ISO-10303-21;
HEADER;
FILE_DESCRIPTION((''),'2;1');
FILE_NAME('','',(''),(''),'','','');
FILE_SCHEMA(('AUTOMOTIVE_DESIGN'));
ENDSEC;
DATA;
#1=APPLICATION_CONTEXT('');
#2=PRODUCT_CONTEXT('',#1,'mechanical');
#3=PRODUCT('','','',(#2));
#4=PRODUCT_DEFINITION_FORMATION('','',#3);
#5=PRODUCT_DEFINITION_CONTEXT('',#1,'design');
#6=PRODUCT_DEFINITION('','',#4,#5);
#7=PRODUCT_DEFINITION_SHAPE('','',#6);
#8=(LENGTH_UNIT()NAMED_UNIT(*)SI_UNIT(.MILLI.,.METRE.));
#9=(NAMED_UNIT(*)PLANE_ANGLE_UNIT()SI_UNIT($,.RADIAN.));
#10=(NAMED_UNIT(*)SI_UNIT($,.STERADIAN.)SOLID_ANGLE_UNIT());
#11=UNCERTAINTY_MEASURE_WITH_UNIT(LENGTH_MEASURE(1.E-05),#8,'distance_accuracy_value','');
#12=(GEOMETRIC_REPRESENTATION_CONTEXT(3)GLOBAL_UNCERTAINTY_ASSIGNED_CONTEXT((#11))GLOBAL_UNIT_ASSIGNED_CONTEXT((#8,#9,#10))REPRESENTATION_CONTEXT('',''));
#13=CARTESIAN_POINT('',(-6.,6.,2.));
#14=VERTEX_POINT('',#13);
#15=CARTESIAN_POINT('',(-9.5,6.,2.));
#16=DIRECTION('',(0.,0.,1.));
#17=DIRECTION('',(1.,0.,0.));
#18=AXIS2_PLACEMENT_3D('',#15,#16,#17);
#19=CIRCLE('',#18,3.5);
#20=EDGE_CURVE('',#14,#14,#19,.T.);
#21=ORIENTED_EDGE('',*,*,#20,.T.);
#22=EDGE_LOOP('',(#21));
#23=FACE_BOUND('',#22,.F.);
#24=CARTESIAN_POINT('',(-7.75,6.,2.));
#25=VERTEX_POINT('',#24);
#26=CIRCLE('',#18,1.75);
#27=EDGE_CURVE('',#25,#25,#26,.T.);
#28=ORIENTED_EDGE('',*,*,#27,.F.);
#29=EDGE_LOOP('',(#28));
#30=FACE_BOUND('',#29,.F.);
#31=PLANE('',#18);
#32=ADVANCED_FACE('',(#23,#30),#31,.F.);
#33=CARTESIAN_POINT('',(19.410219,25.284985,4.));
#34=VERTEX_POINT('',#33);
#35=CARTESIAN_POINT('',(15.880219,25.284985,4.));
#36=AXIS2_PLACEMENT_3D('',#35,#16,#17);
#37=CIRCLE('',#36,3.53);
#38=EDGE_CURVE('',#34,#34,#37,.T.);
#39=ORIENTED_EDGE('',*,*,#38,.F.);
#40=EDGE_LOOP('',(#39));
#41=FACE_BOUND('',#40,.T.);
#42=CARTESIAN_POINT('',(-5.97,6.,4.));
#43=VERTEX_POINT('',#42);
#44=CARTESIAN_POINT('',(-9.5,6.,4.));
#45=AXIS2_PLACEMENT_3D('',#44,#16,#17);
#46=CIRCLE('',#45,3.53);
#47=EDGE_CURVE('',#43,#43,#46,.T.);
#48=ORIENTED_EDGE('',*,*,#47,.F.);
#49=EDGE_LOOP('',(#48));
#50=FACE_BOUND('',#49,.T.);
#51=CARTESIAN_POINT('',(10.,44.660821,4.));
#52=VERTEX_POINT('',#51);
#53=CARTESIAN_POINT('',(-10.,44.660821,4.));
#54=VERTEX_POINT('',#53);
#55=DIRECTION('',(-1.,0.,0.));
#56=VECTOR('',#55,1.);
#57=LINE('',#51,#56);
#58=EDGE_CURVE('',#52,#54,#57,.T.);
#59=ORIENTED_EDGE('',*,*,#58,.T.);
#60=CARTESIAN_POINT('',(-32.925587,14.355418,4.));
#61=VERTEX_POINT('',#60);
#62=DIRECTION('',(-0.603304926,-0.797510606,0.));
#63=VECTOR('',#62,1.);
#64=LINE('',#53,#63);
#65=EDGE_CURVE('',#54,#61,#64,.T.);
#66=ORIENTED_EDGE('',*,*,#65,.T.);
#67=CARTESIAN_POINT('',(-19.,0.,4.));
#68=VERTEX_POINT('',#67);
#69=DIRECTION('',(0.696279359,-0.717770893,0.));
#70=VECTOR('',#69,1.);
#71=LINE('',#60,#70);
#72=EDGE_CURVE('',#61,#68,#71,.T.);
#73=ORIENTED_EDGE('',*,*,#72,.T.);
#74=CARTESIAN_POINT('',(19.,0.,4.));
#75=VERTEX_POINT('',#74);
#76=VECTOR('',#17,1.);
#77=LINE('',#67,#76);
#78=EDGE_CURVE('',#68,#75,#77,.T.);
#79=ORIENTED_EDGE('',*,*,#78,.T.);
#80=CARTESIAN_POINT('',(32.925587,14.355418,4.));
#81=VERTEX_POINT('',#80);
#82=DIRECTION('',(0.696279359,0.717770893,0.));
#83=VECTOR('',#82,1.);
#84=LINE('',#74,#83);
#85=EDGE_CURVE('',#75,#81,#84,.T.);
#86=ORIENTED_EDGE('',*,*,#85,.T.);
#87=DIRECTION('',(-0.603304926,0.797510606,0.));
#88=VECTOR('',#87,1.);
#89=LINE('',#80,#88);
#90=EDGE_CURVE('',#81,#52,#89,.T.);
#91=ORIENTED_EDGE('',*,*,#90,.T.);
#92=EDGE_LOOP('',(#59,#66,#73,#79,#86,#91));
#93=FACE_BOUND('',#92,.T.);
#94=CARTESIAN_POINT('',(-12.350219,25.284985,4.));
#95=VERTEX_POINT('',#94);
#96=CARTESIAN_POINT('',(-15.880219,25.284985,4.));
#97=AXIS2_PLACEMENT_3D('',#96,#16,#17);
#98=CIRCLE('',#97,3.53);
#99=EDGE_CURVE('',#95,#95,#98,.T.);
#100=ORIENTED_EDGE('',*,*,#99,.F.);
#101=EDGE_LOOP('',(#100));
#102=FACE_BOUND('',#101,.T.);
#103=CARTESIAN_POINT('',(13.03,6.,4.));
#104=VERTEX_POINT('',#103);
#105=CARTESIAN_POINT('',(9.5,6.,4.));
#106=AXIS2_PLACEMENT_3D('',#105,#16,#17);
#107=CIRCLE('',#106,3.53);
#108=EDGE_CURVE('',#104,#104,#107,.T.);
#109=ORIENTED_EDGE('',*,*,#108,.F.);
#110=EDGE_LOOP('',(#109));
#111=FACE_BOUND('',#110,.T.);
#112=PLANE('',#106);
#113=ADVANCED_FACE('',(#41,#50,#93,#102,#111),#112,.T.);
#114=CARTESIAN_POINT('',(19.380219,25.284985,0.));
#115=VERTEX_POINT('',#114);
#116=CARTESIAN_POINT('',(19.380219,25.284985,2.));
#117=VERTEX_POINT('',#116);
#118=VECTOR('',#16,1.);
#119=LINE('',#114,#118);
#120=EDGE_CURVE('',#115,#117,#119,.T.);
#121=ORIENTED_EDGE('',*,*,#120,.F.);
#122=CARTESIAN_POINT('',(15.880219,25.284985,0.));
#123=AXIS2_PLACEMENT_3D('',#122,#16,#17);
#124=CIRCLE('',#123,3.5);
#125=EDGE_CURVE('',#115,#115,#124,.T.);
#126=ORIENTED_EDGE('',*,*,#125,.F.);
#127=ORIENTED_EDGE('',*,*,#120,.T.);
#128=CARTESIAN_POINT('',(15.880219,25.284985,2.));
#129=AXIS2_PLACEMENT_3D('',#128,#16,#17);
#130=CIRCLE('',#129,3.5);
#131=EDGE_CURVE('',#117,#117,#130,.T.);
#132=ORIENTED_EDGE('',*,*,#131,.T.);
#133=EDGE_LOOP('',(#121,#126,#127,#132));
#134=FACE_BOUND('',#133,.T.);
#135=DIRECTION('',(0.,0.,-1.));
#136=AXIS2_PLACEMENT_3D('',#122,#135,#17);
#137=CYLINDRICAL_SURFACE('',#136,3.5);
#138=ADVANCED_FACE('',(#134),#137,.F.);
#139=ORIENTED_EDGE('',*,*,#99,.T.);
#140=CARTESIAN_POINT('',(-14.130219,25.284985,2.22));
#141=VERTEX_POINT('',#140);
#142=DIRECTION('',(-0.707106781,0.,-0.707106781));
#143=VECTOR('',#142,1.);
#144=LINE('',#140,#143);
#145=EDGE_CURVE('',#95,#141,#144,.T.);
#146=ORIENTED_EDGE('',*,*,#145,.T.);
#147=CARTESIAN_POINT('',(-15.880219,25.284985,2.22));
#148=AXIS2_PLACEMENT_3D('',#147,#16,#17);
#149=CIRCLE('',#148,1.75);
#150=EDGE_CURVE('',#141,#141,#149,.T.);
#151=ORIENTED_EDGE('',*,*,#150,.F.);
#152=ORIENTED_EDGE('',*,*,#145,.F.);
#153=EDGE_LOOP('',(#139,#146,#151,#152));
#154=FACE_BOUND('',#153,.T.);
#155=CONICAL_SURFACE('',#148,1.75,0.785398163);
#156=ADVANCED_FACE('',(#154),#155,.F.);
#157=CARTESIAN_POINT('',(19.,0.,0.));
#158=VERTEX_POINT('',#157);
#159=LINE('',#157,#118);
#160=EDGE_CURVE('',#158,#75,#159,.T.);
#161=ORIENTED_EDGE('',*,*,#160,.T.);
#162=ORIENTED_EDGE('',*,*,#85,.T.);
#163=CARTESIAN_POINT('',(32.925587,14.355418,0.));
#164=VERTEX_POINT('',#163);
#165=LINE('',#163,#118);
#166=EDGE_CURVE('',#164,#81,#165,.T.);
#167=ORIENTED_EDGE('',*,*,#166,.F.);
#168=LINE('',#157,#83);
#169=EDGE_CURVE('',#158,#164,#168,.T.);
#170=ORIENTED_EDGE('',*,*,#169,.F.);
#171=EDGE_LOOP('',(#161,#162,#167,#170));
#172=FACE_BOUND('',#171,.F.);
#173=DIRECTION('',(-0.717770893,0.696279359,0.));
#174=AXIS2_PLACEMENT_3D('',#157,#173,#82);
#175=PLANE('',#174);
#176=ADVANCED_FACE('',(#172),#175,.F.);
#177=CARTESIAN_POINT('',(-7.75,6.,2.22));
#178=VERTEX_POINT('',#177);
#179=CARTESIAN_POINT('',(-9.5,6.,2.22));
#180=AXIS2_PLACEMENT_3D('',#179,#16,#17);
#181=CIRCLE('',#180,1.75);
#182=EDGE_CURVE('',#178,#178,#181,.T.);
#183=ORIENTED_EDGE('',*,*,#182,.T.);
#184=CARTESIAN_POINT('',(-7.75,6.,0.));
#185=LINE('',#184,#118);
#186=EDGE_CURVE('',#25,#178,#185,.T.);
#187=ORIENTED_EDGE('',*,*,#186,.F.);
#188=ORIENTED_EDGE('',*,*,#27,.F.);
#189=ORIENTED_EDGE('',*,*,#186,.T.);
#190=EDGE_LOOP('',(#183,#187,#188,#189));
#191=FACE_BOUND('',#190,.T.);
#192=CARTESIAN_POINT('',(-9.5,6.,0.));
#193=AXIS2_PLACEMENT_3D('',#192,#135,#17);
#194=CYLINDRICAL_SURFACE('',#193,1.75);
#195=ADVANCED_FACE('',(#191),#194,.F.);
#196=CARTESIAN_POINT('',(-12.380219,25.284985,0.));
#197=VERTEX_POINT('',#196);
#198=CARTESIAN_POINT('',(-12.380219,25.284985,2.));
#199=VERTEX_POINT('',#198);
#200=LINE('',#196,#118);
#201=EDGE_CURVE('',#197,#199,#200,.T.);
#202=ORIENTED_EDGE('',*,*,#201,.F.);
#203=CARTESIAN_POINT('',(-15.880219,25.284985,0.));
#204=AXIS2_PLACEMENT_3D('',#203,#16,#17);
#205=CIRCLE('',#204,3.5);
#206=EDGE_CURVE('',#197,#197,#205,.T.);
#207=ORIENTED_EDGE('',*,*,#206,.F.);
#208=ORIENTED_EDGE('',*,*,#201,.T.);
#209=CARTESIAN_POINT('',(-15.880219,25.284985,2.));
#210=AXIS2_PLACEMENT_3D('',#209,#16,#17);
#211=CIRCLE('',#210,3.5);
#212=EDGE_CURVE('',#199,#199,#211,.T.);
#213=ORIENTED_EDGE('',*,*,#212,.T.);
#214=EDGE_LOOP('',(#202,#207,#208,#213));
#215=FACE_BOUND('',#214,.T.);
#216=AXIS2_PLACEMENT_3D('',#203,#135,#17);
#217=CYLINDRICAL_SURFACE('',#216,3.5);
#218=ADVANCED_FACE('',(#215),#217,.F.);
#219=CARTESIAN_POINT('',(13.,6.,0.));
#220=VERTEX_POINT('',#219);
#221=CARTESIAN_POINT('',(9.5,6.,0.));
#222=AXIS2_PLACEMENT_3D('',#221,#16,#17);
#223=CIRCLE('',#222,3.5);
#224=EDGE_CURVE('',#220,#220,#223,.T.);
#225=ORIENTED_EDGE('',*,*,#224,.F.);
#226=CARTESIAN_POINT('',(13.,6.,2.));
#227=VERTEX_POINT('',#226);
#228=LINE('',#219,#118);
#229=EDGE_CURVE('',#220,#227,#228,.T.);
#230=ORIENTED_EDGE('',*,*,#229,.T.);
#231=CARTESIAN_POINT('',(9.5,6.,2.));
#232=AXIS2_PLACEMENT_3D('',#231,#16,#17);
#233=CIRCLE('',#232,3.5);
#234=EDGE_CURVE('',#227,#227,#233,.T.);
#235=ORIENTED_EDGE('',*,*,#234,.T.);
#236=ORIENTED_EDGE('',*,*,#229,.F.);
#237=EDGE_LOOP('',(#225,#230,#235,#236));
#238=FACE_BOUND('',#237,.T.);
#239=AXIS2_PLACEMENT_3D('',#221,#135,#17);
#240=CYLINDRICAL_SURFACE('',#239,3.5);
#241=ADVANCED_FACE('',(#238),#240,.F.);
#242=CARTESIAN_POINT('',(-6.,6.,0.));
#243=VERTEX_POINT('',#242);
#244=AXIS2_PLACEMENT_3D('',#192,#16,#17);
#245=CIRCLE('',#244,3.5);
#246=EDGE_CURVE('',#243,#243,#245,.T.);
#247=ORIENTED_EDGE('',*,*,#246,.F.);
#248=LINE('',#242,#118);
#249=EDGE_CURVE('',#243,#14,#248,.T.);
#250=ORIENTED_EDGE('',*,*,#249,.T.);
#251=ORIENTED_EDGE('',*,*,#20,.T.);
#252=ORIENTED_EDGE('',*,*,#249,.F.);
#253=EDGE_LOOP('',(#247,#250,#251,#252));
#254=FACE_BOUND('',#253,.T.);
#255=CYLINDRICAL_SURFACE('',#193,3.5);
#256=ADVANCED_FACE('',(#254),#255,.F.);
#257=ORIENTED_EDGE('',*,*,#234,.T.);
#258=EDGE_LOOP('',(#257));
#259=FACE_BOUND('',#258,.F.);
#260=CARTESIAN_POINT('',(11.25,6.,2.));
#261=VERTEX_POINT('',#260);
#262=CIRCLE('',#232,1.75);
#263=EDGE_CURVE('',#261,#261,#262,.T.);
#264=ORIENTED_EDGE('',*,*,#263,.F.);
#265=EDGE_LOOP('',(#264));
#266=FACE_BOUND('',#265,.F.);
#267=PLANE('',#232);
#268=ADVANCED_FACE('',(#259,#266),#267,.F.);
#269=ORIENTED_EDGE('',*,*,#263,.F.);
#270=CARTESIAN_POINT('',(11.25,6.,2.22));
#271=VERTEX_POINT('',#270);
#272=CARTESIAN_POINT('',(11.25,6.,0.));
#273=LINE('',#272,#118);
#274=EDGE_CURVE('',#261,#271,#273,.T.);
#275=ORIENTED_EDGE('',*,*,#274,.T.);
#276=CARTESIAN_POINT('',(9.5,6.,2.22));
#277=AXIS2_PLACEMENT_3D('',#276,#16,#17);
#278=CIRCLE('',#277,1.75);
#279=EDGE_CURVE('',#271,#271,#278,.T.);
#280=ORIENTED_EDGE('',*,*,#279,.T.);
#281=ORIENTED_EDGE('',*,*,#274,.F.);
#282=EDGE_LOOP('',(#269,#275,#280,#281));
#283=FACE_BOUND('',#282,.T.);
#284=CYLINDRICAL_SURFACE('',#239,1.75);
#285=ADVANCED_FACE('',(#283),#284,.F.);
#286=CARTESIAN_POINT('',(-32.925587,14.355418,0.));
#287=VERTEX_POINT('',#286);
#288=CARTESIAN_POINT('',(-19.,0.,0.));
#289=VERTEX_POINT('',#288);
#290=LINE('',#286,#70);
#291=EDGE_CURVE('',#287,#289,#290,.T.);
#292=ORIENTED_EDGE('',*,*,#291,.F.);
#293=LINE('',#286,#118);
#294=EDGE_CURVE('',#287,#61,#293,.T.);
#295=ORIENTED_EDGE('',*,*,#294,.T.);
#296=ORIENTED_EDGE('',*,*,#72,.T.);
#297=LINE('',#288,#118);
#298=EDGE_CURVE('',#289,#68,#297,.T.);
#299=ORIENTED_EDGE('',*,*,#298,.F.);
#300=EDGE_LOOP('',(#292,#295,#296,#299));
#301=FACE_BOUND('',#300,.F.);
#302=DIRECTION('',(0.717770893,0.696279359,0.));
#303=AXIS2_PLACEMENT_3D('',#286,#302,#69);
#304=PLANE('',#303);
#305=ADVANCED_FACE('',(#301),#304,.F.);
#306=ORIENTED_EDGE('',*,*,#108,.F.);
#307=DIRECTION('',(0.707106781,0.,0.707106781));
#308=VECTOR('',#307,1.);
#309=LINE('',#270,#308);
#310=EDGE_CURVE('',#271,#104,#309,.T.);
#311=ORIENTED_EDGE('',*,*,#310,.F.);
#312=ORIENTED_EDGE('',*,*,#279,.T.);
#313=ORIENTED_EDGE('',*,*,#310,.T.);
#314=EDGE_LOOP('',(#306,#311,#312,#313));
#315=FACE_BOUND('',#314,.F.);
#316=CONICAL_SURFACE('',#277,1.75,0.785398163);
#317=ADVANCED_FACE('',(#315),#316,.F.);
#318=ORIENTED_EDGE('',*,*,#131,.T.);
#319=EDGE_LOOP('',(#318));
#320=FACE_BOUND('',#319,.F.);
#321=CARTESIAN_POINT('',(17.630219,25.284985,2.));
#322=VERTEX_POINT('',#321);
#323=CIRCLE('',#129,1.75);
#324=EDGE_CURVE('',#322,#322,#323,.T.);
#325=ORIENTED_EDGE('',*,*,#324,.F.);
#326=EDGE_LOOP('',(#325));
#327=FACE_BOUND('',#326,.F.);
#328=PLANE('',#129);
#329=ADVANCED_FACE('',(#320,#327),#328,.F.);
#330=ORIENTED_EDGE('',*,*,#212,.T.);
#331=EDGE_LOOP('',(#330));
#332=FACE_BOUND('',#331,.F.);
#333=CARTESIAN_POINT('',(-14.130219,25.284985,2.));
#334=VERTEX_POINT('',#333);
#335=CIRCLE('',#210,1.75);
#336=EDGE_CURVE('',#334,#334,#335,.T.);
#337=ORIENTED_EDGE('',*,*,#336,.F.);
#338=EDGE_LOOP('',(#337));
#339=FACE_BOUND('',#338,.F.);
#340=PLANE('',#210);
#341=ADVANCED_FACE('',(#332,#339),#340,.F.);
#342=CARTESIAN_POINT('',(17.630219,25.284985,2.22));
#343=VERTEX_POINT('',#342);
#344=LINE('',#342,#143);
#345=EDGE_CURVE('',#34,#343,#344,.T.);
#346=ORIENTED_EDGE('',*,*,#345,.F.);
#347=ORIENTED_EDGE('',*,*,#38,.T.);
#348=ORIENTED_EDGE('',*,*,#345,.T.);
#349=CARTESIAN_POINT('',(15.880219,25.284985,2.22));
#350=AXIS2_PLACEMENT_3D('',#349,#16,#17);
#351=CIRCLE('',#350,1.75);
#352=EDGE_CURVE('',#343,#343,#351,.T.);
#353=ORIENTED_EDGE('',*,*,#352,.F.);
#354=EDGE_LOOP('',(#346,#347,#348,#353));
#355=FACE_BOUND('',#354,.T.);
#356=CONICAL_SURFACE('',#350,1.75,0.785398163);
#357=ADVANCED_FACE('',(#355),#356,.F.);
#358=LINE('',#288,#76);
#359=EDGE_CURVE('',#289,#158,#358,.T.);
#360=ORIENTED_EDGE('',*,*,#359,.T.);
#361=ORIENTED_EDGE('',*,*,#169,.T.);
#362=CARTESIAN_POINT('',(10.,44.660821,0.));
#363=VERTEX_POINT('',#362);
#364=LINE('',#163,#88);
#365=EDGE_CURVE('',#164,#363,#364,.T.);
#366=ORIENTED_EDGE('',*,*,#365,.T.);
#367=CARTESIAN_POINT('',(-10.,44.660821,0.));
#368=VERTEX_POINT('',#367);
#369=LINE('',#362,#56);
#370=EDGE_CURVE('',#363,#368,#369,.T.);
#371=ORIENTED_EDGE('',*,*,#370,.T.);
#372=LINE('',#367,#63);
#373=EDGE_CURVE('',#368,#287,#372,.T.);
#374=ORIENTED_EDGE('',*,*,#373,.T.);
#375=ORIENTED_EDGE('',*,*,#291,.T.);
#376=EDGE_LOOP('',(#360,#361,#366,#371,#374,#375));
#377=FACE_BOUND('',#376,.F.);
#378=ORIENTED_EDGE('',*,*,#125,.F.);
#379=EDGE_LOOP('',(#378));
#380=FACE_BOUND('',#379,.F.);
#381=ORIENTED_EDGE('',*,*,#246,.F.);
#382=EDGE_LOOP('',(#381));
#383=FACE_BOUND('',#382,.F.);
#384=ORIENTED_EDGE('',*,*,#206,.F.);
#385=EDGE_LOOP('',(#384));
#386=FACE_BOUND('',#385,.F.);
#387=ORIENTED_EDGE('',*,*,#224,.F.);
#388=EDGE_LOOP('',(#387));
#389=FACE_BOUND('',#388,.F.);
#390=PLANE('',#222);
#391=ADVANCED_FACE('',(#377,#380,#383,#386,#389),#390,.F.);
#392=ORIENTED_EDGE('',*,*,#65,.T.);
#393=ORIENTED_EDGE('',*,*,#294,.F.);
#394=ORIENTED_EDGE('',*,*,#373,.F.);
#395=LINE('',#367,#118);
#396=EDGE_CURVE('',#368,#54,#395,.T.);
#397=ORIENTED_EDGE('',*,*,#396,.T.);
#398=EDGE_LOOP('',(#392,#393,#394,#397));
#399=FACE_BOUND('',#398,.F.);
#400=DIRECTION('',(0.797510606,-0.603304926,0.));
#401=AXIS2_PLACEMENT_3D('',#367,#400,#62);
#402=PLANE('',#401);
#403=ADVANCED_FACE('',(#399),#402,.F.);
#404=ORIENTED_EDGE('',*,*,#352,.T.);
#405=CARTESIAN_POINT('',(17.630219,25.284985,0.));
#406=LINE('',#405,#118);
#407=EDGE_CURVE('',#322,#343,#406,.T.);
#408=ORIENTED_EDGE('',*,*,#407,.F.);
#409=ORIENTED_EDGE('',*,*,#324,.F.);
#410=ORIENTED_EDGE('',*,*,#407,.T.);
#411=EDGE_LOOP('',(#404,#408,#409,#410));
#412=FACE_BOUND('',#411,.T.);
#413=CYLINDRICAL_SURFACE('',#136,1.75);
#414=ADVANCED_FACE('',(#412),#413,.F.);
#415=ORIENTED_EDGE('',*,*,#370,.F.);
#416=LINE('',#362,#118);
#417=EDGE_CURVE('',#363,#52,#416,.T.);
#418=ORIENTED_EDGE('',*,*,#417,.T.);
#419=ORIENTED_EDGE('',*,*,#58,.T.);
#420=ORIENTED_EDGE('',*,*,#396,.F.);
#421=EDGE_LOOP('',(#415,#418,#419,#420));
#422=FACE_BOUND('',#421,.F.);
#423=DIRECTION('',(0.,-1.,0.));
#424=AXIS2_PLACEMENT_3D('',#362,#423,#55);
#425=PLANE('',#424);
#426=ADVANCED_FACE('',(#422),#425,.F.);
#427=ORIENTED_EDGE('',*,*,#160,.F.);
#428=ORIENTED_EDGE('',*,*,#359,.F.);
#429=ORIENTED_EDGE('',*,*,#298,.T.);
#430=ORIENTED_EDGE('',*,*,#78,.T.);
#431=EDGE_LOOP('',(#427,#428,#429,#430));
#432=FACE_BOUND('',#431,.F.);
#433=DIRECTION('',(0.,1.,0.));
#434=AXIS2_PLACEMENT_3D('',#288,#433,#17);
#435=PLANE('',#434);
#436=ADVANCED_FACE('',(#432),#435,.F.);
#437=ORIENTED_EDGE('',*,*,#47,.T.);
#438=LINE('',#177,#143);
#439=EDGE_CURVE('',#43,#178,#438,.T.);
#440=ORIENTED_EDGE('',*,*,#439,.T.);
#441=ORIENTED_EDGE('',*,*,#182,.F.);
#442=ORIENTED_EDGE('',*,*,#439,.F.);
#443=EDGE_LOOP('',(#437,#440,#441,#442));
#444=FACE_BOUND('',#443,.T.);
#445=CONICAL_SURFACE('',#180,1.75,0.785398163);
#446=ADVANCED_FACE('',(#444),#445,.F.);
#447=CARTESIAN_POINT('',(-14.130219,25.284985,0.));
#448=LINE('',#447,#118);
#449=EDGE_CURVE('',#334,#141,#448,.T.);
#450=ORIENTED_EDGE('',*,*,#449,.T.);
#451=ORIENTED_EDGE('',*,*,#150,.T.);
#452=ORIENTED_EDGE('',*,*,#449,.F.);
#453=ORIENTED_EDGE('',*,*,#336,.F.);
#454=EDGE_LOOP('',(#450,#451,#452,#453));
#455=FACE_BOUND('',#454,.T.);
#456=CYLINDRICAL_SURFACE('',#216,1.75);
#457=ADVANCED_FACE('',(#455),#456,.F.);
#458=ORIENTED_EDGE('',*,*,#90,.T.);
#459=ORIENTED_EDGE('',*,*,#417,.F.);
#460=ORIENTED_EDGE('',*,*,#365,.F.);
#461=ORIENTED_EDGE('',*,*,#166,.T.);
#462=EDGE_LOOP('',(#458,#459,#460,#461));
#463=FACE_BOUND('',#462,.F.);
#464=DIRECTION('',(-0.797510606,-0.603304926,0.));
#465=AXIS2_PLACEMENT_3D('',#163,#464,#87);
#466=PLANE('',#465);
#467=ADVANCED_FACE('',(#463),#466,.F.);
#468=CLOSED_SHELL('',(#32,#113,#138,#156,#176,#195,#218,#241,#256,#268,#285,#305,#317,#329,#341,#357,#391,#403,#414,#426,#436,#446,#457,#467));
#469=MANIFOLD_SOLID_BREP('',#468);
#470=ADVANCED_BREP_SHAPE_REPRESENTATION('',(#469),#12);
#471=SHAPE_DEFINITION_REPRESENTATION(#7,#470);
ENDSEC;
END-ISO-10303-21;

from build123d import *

# Parameters (mm, degrees)
F0_R     = 3.5
F1_DEPTH = 4
F0_R_2   = 1.75
F2_DEPTH = 4
F3_SIZE  = 1.78
F4_DEPTH = 2


# Not quite as in the source:
# - a feature names something its author has since deleted; it is built from what else it names


with BuildPart() as f1:
    # F0 (on Top) → F1 (new body)
    with BuildSketch(Plane.XY):
        Polygon((0, 44.6608208763), (0, 0), (19, 0), (32.9255871796, 14.3554178519), (10, 44.6608208763), align=None)
        with Locations((9.5, 6)):
            Circle(F0_R, mode=Mode.SUBTRACT)
        with Locations((15.8802193485, 25.2849848836)):
            Circle(F0_R, mode=Mode.SUBTRACT)
        Polygon((-9.5, 0), (0, 0), (0, 44.6608208763), (-10, 44.6608208763), (-32.9255871796, 14.3554178519), (-19, 0), align=None)
        with Locations((-9.5, 6)):
            Circle(F0_R, mode=Mode.SUBTRACT)
        with Locations((-15.8802193485, 25.2849848836)):
            Circle(F0_R, mode=Mode.SUBTRACT)
    extrude(amount=F1_DEPTH)

    # F0 (on Top) → F2 (join)
    with BuildSketch(Plane.XY):
        with Locations((9.5, 6)):
            Circle(F0_R)
        with Locations((9.5, 6)):
            Circle(F0_R_2, mode=Mode.SUBTRACT)
        with Locations((-9.5, 6)):
            Circle(F0_R)
        with Locations((-9.5, 6)):
            Circle(F0_R_2, mode=Mode.SUBTRACT)
        with Locations((-15.8802193485, 25.2849848836)):
            Circle(F0_R)
        with Locations((-15.8802193485, 25.2849848836)):
            Circle(F0_R_2, mode=Mode.SUBTRACT)
        with Locations((15.8802193485, 25.2849848836)):
            Circle(F0_R)
        with Locations((15.8802193485, 25.2849848836)):
            Circle(F0_R_2, mode=Mode.SUBTRACT)
    extrude(amount=F2_DEPTH)

    # F3
    f3_edges = [f1.edges().sort_by_distance(p)[0] for p in [
        (14.130219, 25.284985, 4),
        (-17.630219, 25.284985, 4),
        (-11.25, 6, 4),
        (7.75, 6, 4),
    ]]
    chamfer(f3_edges, length=F3_SIZE)

    # F0 (on Top) → F4 (cut)
    with BuildSketch(Plane.XY):
        with Locations((-15.8802193485, 25.2849848836)):
            Circle(F0_R)
        with Locations((-15.8802193485, 25.2849848836)):
            Circle(F0_R_2, mode=Mode.SUBTRACT)
        with Locations((15.8802193485, 25.2849848836)):
            Circle(F0_R)
        with Locations((15.8802193485, 25.2849848836)):
            Circle(F0_R_2, mode=Mode.SUBTRACT)
        with Locations((9.5, 6)):
            Circle(F0_R)
        with Locations((9.5, 6)):
            Circle(F0_R_2, mode=Mode.SUBTRACT)
        with Locations((-9.5, 6)):
            Circle(F0_R)
        with Locations((-9.5, 6)):
            Circle(F0_R_2, mode=Mode.SUBTRACT)
    extrude(amount=F4_DEPTH, mode=Mode.SUBTRACT)


solid = f1.part
